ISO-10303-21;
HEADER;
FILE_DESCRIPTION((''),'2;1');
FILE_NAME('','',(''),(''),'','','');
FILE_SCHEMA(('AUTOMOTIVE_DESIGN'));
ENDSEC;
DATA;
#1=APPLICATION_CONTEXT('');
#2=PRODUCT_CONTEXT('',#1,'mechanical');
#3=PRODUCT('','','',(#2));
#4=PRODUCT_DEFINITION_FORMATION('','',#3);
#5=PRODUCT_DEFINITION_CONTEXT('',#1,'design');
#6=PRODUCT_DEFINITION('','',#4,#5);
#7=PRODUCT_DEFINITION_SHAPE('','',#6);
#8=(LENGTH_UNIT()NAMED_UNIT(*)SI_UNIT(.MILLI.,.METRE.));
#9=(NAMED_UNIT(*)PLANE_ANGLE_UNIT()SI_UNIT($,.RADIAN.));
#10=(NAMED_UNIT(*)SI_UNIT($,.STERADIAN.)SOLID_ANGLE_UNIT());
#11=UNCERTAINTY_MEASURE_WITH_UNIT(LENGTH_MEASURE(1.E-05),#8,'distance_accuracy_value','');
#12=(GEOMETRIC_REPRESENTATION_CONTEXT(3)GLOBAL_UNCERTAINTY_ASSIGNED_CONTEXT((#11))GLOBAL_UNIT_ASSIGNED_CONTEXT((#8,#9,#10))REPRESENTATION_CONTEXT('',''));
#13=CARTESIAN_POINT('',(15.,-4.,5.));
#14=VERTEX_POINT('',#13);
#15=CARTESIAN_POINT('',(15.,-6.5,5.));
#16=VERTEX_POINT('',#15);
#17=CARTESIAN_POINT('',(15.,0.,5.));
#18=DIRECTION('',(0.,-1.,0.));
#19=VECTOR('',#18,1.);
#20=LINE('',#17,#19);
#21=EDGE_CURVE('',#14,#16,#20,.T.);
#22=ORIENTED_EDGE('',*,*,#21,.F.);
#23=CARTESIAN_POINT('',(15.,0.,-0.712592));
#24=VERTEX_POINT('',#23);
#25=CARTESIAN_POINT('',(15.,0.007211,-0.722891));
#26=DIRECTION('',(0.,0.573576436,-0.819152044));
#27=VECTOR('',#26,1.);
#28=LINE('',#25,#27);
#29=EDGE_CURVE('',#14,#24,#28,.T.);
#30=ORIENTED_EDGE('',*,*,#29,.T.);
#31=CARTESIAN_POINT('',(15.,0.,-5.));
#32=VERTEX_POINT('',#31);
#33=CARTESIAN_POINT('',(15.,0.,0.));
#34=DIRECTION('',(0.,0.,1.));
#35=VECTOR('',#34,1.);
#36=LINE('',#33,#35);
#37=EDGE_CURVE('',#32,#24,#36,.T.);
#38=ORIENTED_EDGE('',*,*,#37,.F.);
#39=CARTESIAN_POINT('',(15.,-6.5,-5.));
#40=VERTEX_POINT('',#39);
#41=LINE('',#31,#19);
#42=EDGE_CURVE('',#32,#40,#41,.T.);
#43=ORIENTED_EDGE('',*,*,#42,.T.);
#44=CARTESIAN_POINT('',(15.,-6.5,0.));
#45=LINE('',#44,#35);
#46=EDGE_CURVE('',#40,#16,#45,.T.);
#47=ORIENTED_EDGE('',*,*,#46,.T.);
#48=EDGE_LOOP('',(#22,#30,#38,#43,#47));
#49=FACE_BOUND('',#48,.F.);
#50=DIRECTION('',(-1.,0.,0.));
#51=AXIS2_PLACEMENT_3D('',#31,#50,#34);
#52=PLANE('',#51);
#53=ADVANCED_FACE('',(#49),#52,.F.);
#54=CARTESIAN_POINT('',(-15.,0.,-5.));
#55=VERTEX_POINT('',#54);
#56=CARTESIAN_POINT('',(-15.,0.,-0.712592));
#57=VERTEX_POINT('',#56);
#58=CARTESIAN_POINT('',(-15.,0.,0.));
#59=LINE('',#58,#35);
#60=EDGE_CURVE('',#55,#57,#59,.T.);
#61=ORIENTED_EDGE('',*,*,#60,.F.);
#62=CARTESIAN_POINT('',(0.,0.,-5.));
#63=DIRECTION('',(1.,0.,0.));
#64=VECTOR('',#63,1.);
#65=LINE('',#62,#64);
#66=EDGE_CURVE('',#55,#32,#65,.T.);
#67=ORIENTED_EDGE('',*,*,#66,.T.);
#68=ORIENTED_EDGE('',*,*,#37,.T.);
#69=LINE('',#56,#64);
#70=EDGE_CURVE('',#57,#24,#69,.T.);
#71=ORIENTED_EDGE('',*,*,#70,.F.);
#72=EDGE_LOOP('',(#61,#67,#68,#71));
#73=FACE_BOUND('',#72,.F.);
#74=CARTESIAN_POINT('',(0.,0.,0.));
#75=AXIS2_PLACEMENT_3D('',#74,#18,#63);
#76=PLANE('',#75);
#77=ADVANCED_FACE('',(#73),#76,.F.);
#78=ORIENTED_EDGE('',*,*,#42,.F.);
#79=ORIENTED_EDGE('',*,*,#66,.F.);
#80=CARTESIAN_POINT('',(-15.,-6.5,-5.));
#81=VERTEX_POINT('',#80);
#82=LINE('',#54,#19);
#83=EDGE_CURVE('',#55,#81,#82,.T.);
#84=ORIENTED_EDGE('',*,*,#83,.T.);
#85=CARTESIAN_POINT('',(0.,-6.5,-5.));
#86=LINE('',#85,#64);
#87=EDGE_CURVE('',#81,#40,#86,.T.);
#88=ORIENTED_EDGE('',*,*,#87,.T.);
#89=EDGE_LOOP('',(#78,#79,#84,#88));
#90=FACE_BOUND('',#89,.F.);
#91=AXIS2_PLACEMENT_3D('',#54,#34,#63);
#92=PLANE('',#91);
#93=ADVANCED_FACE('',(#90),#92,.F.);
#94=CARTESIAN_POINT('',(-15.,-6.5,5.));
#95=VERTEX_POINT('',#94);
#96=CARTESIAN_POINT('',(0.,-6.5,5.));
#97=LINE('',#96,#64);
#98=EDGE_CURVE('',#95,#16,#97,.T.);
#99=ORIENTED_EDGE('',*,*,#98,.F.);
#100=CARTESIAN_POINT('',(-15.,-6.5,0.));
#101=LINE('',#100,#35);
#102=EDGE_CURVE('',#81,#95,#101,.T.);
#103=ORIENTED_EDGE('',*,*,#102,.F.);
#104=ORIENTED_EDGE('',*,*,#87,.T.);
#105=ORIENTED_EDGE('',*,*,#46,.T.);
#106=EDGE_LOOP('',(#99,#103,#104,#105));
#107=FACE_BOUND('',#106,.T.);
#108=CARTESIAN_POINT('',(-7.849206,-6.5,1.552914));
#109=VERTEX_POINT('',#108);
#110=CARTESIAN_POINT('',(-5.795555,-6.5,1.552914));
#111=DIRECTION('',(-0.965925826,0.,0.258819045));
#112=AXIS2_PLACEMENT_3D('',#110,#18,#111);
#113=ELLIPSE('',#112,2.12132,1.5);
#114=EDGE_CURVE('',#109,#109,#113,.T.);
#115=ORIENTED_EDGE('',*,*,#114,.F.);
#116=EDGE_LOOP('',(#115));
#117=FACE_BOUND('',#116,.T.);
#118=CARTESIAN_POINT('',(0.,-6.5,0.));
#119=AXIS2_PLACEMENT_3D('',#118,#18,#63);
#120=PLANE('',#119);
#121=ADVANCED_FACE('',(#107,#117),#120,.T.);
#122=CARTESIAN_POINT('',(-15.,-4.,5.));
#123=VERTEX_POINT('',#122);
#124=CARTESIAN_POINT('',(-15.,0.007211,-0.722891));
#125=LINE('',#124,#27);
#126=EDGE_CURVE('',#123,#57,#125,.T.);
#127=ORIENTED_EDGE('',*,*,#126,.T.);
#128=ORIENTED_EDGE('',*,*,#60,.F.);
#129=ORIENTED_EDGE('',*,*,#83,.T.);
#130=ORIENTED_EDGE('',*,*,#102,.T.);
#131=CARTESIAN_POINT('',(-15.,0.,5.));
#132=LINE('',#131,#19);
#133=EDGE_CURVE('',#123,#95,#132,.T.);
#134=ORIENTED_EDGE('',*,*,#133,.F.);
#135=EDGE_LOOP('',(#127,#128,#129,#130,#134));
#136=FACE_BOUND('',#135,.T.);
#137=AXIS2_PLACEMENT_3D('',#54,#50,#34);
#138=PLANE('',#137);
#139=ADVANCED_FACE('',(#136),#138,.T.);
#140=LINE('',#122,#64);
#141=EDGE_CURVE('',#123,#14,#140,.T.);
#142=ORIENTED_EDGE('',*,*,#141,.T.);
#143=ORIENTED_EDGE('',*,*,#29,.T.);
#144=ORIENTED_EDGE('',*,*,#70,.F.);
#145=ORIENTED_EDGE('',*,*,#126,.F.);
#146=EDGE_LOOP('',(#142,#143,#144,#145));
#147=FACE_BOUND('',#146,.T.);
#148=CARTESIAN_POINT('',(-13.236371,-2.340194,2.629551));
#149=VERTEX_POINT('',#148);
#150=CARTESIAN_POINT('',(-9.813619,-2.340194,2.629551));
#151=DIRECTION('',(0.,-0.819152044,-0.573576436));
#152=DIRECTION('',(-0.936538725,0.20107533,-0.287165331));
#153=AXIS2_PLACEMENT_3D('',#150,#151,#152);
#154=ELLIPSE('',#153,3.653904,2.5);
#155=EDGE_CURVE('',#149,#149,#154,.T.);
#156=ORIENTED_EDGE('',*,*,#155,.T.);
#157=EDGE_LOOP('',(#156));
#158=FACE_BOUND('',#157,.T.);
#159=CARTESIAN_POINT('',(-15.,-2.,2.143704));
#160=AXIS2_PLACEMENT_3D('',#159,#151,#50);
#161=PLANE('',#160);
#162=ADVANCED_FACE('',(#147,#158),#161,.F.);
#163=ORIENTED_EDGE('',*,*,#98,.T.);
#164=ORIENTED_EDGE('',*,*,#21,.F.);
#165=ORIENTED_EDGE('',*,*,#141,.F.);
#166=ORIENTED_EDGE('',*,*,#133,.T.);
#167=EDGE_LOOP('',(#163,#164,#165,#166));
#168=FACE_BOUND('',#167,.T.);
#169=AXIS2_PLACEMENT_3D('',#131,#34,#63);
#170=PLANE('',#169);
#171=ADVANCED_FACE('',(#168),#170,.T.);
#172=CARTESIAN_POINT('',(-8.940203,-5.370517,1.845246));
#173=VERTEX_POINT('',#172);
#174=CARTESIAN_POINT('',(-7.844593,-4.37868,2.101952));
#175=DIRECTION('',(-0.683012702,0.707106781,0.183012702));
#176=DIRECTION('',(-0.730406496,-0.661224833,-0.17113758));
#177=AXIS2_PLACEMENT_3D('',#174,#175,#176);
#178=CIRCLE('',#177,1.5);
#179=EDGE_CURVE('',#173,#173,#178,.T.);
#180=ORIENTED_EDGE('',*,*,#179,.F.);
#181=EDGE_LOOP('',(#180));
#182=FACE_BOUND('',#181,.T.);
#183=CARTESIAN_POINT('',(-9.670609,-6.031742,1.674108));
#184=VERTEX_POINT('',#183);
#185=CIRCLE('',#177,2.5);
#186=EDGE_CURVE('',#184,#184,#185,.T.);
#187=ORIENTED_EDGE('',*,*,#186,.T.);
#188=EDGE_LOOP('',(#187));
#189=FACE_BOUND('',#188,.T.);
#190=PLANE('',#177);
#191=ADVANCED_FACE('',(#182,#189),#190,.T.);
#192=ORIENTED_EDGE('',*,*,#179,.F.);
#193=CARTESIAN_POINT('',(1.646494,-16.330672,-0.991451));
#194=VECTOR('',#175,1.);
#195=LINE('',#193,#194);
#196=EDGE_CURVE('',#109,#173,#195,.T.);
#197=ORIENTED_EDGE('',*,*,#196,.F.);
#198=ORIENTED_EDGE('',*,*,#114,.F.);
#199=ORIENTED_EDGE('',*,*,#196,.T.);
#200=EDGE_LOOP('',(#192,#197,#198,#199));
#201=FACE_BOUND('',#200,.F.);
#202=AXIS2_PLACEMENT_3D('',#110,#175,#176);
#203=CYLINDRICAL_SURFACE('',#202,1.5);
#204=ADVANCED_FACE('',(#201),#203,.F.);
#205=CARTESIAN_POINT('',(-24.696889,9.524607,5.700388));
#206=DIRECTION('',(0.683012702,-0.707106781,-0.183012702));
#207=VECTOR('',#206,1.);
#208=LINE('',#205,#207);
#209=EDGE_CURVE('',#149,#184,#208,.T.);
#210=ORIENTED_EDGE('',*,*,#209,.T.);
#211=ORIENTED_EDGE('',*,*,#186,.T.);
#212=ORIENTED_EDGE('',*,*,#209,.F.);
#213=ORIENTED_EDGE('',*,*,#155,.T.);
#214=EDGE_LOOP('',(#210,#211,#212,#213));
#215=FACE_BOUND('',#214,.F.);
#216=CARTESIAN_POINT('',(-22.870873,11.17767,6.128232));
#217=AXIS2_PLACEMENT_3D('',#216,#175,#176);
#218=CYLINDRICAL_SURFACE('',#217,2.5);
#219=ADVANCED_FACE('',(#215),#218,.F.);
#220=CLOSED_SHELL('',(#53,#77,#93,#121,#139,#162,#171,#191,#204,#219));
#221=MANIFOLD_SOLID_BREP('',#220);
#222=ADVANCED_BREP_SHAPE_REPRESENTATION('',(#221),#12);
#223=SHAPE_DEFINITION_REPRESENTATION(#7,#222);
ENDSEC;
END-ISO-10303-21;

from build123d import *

# Parameters (mm, degrees)
F0_W      = 30
F0_H      = 10
F1_DEPTH  = 6.5
F6_SIZE2  = 5.712592027
F6_SIZE   = 4
F9_R      = 1.5
F10_DEPTH = 12.5
F12_R     = 2.5
F13_DEPTH = 22


with BuildPart() as f1:
    # F0 (on Front) → F1 (new body)
    with BuildSketch(Plane.XZ):
        Rectangle(F0_W, F0_H)
    extrude(amount=F1_DEPTH)

    # F6
    f6_edges = [f1.edges().sort_by_distance(p)[0] for p in [
        (0, 0, 5),
    ]]
    f6_side = f1.faces().sort_by_distance((0, -3.25, 5))[0]
    chamfer(f6_edges, length=F6_SIZE, length2=F6_SIZE2, reference=f6_side)

    # F9 (on face) → F10 (cut, symmetric)
    with BuildSketch(Plane(origin=(0.2414814566, -0.25, -0.0647047613), x_dir=(-0.7304064958, -0.6612248329, -0.1711375799), z_dir=(-0.6830127019, 0.7071067812, 0.1830127019))):
        with Locations((8.2653104118, 3.1320350886)):
            Circle(F9_R)
    extrude(amount=F10_DEPTH, both=True, mode=Mode.SUBTRACT)

    # F12 (on face) → F13 (cut)
    with BuildSketch(Plane(origin=(-16.8338360907, 17.4276695297, 4.510612786), x_dir=(-0.7304064958, -0.6612248329, -0.1711375799), z_dir=(-0.6830127019, 0.7071067812, 0.1830127019))):
        with Locations((8.2653104118, 3.1320350886)):
            Circle(F12_R)
    extrude(amount=-F13_DEPTH, mode=Mode.SUBTRACT)


solid = f1.part
